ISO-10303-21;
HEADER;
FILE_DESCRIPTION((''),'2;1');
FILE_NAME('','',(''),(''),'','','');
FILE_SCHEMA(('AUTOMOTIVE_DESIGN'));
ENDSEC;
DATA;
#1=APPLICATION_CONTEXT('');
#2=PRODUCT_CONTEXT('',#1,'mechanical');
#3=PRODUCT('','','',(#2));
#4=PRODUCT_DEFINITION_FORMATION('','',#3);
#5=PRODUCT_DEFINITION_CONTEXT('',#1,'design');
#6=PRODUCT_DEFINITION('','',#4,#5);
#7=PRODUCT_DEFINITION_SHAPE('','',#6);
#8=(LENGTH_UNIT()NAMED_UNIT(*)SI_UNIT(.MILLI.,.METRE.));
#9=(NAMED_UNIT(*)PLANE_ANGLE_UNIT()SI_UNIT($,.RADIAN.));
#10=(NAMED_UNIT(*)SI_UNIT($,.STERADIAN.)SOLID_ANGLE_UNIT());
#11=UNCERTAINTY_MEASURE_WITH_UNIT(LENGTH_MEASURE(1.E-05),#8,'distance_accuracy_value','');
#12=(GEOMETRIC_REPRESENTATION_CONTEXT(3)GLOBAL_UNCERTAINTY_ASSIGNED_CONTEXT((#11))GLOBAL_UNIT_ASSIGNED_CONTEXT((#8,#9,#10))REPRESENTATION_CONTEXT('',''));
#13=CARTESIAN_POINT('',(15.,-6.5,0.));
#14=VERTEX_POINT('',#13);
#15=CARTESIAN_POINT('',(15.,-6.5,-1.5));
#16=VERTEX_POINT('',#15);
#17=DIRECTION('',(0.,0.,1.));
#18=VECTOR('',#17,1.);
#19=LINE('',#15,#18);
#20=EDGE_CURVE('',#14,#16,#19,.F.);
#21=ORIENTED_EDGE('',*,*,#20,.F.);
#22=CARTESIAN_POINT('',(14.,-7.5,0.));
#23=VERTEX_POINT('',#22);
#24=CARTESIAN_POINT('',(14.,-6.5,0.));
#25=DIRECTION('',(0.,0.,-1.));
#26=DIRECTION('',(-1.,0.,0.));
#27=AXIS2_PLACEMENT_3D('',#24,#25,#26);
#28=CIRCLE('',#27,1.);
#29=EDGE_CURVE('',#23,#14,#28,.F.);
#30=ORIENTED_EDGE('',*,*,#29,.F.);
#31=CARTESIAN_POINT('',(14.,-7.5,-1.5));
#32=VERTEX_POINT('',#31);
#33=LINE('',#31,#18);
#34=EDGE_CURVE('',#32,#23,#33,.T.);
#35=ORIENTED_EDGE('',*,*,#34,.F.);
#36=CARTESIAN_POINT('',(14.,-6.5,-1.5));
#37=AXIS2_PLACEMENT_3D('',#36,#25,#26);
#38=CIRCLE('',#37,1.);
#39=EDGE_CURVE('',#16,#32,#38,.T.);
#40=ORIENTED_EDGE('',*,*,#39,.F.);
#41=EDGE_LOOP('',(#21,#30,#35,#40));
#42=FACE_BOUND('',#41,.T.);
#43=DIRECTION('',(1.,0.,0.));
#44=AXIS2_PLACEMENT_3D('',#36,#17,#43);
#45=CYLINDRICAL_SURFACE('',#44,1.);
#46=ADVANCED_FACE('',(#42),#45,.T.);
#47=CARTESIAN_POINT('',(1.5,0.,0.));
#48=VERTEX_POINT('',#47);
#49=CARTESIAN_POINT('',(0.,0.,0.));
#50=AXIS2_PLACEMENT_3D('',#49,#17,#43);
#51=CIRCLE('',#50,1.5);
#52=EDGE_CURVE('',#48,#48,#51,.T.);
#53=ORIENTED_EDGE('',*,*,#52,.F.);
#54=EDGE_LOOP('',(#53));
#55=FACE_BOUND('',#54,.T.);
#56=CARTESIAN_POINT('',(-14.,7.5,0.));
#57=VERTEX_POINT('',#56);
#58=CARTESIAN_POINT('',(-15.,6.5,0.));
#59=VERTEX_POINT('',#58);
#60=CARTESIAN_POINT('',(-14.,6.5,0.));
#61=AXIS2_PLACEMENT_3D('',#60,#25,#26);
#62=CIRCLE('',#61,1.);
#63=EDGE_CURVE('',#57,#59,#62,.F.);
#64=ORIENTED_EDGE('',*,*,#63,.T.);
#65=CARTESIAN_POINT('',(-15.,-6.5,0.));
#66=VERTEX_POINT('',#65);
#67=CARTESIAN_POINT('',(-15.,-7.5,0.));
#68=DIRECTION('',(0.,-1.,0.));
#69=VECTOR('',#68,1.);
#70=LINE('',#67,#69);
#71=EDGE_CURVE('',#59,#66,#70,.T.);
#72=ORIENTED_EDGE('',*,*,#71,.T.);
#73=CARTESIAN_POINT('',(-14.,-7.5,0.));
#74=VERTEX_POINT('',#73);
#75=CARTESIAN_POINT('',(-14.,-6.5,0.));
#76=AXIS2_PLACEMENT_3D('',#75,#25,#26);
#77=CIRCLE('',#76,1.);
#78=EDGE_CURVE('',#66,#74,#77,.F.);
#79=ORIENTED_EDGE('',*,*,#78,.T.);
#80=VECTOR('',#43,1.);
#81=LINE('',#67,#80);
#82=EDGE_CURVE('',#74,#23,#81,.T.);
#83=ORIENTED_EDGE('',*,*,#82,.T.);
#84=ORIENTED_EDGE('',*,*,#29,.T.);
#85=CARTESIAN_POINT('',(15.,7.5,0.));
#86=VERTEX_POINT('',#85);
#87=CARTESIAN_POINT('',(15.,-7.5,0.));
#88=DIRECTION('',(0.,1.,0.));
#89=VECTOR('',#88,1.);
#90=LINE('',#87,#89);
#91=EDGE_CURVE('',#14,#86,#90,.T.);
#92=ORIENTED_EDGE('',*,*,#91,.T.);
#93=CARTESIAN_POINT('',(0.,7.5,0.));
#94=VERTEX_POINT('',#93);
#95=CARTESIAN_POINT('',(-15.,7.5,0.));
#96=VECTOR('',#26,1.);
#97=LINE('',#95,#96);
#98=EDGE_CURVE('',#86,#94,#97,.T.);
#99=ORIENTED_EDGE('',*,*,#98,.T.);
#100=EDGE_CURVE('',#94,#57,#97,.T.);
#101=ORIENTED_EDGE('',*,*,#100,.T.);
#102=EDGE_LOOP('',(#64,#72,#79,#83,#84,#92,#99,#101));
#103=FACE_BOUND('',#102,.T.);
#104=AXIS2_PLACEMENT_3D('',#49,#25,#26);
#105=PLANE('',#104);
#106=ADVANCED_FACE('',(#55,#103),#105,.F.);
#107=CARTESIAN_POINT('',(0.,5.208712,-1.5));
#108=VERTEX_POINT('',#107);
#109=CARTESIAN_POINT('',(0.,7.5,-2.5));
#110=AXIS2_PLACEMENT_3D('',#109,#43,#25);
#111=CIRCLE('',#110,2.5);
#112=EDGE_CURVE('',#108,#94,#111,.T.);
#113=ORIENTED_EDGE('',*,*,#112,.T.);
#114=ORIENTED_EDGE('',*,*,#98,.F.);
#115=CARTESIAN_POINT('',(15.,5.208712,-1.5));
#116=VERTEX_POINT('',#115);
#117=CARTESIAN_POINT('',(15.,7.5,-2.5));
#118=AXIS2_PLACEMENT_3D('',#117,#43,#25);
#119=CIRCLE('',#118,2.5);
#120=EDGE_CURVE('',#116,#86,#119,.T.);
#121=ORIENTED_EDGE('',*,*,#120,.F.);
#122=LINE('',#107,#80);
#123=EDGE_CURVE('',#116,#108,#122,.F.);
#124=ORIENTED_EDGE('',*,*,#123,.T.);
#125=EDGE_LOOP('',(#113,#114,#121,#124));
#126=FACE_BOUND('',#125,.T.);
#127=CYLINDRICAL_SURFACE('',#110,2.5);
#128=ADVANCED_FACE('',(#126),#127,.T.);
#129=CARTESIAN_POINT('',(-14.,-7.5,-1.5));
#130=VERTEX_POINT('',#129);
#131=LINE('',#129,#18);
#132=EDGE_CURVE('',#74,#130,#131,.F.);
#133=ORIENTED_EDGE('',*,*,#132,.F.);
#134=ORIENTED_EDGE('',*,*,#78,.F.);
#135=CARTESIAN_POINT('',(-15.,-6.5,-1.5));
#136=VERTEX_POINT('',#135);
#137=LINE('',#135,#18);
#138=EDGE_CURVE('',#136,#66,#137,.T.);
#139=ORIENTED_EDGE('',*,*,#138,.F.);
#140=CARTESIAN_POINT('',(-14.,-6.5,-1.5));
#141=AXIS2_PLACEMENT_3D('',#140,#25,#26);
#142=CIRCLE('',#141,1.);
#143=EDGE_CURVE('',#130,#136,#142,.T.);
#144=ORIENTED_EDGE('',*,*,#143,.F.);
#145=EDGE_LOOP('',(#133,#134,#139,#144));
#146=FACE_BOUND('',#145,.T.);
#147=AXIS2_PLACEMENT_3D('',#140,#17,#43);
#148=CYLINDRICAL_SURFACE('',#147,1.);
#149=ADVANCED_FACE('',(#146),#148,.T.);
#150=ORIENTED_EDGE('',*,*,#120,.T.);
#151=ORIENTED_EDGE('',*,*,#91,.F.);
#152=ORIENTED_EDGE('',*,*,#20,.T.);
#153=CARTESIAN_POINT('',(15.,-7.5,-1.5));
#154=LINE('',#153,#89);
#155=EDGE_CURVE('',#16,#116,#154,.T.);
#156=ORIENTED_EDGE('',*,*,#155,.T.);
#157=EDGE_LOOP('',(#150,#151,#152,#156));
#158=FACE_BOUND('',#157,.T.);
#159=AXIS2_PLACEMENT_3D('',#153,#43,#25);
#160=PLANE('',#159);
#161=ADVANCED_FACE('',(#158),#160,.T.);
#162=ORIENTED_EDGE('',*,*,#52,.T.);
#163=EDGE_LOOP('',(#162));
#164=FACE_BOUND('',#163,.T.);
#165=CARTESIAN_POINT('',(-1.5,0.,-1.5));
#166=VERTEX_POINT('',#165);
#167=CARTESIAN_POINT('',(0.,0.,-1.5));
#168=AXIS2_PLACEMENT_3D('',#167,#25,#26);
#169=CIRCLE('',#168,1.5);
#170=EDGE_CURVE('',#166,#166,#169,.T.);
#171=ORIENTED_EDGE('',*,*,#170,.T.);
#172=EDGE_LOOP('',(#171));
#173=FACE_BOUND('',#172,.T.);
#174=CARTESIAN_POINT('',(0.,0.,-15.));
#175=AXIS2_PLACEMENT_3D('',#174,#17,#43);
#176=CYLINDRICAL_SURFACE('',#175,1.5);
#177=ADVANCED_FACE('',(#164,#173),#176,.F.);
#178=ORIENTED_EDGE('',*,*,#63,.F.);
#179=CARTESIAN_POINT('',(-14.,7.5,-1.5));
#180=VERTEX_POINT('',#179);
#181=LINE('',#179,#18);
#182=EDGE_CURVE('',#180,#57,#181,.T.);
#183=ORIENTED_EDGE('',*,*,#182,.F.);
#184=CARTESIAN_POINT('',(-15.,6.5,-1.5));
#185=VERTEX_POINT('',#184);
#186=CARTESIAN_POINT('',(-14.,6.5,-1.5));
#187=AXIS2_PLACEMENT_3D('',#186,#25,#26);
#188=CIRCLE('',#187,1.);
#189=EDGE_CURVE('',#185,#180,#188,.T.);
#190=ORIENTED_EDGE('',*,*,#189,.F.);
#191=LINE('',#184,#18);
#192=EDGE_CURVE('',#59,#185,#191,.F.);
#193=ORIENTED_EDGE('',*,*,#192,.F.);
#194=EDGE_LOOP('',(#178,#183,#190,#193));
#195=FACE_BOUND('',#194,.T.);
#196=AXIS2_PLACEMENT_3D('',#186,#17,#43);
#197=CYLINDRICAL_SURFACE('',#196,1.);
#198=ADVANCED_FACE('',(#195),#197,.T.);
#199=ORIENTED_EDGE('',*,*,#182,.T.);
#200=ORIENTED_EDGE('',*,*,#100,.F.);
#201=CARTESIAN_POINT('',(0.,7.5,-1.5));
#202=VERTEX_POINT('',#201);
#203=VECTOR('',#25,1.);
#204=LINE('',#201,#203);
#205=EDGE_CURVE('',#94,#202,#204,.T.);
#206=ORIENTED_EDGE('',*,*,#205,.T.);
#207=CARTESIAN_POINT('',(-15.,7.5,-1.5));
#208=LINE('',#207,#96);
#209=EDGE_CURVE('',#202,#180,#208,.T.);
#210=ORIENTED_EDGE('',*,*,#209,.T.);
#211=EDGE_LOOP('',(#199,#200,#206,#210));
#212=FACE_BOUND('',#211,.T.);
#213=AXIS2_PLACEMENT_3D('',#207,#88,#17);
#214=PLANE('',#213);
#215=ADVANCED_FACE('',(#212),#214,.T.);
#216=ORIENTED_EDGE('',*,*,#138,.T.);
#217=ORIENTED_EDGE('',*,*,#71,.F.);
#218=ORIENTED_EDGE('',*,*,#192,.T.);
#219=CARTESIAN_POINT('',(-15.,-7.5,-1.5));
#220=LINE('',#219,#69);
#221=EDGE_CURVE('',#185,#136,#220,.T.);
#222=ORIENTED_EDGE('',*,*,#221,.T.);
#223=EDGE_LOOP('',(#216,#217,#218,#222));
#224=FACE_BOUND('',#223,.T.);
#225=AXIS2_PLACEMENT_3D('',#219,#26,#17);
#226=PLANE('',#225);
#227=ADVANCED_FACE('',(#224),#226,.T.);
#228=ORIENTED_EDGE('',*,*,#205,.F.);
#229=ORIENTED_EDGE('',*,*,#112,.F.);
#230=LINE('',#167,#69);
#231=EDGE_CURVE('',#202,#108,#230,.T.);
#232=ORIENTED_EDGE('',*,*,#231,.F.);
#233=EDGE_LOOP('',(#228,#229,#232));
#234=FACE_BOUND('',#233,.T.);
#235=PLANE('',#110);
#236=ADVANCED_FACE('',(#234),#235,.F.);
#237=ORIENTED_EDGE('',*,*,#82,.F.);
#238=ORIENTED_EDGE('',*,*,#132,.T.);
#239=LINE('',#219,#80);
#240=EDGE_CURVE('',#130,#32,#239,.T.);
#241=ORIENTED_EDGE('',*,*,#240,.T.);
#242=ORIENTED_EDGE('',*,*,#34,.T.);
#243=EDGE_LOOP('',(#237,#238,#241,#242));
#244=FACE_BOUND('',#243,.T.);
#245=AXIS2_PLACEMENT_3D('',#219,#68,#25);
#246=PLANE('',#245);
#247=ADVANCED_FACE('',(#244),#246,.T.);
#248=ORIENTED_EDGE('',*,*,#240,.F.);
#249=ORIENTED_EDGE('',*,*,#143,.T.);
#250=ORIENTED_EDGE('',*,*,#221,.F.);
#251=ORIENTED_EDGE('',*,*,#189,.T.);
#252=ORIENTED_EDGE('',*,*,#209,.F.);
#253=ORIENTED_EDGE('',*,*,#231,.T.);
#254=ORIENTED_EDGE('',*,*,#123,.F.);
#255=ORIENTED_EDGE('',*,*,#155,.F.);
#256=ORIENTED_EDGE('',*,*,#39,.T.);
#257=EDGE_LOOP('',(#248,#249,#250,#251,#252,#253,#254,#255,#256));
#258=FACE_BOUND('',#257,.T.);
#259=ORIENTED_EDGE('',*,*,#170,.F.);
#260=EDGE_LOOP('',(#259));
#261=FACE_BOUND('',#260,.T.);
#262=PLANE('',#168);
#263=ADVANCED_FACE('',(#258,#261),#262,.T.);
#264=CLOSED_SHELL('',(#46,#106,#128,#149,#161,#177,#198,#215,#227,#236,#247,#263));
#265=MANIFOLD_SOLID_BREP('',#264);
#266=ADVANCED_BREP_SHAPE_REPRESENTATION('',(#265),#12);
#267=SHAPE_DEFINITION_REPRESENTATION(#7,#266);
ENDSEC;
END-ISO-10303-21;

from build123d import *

# Parameters (mm, degrees)
SKETCH_1_W             = 30
SKETCH_1_H             = 15
SM_BASE_FLANGE_1_DEPTH = 1.5
SKETCH_6_R             = 2.5
EXTRUDE_1_DEPTH        = 15
SKETCH_7_R             = 1.5
CUT_EXTRUDE_1_DEPTH    = 15
FILLET_1_R             = 1


# Sheet-metal steps are written as plain solids
with BuildPart() as part:
    # Sketch 1 → 基体-法兰1 (new body)
    with BuildSketch(Plane.XY):
        Rectangle(SKETCH_1_W, SKETCH_1_H)
    extrude(amount=-SM_BASE_FLANGE_1_DEPTH)

    # 草图6 → 凸台-拉伸1 (add)
    with BuildSketch(Plane(origin=(15, 0, 0), x_dir=(0, 0, -1), z_dir=(1, 0, 0))):
        with Locations((2.5, 7.5)):
            Circle(SKETCH_6_R)
    extrude(amount=-EXTRUDE_1_DEPTH)

    # 草图7 → 切除-拉伸1 (cut)
    with BuildSketch(Plane.XY):
        Circle(SKETCH_7_R)
    extrude(amount=-CUT_EXTRUDE_1_DEPTH, mode=Mode.SUBTRACT)

    # 圆角1
    fillet_1_edges = [part.edges().sort_by_distance(p)[0] for p in [
        (15, -7.5, -0.75),
        (-15, -7.5, -0.75),
        (-15, 7.5, -0.75),
    ]]
    fillet(fillet_1_edges, radius=FILLET_1_R)


solid = part.part
